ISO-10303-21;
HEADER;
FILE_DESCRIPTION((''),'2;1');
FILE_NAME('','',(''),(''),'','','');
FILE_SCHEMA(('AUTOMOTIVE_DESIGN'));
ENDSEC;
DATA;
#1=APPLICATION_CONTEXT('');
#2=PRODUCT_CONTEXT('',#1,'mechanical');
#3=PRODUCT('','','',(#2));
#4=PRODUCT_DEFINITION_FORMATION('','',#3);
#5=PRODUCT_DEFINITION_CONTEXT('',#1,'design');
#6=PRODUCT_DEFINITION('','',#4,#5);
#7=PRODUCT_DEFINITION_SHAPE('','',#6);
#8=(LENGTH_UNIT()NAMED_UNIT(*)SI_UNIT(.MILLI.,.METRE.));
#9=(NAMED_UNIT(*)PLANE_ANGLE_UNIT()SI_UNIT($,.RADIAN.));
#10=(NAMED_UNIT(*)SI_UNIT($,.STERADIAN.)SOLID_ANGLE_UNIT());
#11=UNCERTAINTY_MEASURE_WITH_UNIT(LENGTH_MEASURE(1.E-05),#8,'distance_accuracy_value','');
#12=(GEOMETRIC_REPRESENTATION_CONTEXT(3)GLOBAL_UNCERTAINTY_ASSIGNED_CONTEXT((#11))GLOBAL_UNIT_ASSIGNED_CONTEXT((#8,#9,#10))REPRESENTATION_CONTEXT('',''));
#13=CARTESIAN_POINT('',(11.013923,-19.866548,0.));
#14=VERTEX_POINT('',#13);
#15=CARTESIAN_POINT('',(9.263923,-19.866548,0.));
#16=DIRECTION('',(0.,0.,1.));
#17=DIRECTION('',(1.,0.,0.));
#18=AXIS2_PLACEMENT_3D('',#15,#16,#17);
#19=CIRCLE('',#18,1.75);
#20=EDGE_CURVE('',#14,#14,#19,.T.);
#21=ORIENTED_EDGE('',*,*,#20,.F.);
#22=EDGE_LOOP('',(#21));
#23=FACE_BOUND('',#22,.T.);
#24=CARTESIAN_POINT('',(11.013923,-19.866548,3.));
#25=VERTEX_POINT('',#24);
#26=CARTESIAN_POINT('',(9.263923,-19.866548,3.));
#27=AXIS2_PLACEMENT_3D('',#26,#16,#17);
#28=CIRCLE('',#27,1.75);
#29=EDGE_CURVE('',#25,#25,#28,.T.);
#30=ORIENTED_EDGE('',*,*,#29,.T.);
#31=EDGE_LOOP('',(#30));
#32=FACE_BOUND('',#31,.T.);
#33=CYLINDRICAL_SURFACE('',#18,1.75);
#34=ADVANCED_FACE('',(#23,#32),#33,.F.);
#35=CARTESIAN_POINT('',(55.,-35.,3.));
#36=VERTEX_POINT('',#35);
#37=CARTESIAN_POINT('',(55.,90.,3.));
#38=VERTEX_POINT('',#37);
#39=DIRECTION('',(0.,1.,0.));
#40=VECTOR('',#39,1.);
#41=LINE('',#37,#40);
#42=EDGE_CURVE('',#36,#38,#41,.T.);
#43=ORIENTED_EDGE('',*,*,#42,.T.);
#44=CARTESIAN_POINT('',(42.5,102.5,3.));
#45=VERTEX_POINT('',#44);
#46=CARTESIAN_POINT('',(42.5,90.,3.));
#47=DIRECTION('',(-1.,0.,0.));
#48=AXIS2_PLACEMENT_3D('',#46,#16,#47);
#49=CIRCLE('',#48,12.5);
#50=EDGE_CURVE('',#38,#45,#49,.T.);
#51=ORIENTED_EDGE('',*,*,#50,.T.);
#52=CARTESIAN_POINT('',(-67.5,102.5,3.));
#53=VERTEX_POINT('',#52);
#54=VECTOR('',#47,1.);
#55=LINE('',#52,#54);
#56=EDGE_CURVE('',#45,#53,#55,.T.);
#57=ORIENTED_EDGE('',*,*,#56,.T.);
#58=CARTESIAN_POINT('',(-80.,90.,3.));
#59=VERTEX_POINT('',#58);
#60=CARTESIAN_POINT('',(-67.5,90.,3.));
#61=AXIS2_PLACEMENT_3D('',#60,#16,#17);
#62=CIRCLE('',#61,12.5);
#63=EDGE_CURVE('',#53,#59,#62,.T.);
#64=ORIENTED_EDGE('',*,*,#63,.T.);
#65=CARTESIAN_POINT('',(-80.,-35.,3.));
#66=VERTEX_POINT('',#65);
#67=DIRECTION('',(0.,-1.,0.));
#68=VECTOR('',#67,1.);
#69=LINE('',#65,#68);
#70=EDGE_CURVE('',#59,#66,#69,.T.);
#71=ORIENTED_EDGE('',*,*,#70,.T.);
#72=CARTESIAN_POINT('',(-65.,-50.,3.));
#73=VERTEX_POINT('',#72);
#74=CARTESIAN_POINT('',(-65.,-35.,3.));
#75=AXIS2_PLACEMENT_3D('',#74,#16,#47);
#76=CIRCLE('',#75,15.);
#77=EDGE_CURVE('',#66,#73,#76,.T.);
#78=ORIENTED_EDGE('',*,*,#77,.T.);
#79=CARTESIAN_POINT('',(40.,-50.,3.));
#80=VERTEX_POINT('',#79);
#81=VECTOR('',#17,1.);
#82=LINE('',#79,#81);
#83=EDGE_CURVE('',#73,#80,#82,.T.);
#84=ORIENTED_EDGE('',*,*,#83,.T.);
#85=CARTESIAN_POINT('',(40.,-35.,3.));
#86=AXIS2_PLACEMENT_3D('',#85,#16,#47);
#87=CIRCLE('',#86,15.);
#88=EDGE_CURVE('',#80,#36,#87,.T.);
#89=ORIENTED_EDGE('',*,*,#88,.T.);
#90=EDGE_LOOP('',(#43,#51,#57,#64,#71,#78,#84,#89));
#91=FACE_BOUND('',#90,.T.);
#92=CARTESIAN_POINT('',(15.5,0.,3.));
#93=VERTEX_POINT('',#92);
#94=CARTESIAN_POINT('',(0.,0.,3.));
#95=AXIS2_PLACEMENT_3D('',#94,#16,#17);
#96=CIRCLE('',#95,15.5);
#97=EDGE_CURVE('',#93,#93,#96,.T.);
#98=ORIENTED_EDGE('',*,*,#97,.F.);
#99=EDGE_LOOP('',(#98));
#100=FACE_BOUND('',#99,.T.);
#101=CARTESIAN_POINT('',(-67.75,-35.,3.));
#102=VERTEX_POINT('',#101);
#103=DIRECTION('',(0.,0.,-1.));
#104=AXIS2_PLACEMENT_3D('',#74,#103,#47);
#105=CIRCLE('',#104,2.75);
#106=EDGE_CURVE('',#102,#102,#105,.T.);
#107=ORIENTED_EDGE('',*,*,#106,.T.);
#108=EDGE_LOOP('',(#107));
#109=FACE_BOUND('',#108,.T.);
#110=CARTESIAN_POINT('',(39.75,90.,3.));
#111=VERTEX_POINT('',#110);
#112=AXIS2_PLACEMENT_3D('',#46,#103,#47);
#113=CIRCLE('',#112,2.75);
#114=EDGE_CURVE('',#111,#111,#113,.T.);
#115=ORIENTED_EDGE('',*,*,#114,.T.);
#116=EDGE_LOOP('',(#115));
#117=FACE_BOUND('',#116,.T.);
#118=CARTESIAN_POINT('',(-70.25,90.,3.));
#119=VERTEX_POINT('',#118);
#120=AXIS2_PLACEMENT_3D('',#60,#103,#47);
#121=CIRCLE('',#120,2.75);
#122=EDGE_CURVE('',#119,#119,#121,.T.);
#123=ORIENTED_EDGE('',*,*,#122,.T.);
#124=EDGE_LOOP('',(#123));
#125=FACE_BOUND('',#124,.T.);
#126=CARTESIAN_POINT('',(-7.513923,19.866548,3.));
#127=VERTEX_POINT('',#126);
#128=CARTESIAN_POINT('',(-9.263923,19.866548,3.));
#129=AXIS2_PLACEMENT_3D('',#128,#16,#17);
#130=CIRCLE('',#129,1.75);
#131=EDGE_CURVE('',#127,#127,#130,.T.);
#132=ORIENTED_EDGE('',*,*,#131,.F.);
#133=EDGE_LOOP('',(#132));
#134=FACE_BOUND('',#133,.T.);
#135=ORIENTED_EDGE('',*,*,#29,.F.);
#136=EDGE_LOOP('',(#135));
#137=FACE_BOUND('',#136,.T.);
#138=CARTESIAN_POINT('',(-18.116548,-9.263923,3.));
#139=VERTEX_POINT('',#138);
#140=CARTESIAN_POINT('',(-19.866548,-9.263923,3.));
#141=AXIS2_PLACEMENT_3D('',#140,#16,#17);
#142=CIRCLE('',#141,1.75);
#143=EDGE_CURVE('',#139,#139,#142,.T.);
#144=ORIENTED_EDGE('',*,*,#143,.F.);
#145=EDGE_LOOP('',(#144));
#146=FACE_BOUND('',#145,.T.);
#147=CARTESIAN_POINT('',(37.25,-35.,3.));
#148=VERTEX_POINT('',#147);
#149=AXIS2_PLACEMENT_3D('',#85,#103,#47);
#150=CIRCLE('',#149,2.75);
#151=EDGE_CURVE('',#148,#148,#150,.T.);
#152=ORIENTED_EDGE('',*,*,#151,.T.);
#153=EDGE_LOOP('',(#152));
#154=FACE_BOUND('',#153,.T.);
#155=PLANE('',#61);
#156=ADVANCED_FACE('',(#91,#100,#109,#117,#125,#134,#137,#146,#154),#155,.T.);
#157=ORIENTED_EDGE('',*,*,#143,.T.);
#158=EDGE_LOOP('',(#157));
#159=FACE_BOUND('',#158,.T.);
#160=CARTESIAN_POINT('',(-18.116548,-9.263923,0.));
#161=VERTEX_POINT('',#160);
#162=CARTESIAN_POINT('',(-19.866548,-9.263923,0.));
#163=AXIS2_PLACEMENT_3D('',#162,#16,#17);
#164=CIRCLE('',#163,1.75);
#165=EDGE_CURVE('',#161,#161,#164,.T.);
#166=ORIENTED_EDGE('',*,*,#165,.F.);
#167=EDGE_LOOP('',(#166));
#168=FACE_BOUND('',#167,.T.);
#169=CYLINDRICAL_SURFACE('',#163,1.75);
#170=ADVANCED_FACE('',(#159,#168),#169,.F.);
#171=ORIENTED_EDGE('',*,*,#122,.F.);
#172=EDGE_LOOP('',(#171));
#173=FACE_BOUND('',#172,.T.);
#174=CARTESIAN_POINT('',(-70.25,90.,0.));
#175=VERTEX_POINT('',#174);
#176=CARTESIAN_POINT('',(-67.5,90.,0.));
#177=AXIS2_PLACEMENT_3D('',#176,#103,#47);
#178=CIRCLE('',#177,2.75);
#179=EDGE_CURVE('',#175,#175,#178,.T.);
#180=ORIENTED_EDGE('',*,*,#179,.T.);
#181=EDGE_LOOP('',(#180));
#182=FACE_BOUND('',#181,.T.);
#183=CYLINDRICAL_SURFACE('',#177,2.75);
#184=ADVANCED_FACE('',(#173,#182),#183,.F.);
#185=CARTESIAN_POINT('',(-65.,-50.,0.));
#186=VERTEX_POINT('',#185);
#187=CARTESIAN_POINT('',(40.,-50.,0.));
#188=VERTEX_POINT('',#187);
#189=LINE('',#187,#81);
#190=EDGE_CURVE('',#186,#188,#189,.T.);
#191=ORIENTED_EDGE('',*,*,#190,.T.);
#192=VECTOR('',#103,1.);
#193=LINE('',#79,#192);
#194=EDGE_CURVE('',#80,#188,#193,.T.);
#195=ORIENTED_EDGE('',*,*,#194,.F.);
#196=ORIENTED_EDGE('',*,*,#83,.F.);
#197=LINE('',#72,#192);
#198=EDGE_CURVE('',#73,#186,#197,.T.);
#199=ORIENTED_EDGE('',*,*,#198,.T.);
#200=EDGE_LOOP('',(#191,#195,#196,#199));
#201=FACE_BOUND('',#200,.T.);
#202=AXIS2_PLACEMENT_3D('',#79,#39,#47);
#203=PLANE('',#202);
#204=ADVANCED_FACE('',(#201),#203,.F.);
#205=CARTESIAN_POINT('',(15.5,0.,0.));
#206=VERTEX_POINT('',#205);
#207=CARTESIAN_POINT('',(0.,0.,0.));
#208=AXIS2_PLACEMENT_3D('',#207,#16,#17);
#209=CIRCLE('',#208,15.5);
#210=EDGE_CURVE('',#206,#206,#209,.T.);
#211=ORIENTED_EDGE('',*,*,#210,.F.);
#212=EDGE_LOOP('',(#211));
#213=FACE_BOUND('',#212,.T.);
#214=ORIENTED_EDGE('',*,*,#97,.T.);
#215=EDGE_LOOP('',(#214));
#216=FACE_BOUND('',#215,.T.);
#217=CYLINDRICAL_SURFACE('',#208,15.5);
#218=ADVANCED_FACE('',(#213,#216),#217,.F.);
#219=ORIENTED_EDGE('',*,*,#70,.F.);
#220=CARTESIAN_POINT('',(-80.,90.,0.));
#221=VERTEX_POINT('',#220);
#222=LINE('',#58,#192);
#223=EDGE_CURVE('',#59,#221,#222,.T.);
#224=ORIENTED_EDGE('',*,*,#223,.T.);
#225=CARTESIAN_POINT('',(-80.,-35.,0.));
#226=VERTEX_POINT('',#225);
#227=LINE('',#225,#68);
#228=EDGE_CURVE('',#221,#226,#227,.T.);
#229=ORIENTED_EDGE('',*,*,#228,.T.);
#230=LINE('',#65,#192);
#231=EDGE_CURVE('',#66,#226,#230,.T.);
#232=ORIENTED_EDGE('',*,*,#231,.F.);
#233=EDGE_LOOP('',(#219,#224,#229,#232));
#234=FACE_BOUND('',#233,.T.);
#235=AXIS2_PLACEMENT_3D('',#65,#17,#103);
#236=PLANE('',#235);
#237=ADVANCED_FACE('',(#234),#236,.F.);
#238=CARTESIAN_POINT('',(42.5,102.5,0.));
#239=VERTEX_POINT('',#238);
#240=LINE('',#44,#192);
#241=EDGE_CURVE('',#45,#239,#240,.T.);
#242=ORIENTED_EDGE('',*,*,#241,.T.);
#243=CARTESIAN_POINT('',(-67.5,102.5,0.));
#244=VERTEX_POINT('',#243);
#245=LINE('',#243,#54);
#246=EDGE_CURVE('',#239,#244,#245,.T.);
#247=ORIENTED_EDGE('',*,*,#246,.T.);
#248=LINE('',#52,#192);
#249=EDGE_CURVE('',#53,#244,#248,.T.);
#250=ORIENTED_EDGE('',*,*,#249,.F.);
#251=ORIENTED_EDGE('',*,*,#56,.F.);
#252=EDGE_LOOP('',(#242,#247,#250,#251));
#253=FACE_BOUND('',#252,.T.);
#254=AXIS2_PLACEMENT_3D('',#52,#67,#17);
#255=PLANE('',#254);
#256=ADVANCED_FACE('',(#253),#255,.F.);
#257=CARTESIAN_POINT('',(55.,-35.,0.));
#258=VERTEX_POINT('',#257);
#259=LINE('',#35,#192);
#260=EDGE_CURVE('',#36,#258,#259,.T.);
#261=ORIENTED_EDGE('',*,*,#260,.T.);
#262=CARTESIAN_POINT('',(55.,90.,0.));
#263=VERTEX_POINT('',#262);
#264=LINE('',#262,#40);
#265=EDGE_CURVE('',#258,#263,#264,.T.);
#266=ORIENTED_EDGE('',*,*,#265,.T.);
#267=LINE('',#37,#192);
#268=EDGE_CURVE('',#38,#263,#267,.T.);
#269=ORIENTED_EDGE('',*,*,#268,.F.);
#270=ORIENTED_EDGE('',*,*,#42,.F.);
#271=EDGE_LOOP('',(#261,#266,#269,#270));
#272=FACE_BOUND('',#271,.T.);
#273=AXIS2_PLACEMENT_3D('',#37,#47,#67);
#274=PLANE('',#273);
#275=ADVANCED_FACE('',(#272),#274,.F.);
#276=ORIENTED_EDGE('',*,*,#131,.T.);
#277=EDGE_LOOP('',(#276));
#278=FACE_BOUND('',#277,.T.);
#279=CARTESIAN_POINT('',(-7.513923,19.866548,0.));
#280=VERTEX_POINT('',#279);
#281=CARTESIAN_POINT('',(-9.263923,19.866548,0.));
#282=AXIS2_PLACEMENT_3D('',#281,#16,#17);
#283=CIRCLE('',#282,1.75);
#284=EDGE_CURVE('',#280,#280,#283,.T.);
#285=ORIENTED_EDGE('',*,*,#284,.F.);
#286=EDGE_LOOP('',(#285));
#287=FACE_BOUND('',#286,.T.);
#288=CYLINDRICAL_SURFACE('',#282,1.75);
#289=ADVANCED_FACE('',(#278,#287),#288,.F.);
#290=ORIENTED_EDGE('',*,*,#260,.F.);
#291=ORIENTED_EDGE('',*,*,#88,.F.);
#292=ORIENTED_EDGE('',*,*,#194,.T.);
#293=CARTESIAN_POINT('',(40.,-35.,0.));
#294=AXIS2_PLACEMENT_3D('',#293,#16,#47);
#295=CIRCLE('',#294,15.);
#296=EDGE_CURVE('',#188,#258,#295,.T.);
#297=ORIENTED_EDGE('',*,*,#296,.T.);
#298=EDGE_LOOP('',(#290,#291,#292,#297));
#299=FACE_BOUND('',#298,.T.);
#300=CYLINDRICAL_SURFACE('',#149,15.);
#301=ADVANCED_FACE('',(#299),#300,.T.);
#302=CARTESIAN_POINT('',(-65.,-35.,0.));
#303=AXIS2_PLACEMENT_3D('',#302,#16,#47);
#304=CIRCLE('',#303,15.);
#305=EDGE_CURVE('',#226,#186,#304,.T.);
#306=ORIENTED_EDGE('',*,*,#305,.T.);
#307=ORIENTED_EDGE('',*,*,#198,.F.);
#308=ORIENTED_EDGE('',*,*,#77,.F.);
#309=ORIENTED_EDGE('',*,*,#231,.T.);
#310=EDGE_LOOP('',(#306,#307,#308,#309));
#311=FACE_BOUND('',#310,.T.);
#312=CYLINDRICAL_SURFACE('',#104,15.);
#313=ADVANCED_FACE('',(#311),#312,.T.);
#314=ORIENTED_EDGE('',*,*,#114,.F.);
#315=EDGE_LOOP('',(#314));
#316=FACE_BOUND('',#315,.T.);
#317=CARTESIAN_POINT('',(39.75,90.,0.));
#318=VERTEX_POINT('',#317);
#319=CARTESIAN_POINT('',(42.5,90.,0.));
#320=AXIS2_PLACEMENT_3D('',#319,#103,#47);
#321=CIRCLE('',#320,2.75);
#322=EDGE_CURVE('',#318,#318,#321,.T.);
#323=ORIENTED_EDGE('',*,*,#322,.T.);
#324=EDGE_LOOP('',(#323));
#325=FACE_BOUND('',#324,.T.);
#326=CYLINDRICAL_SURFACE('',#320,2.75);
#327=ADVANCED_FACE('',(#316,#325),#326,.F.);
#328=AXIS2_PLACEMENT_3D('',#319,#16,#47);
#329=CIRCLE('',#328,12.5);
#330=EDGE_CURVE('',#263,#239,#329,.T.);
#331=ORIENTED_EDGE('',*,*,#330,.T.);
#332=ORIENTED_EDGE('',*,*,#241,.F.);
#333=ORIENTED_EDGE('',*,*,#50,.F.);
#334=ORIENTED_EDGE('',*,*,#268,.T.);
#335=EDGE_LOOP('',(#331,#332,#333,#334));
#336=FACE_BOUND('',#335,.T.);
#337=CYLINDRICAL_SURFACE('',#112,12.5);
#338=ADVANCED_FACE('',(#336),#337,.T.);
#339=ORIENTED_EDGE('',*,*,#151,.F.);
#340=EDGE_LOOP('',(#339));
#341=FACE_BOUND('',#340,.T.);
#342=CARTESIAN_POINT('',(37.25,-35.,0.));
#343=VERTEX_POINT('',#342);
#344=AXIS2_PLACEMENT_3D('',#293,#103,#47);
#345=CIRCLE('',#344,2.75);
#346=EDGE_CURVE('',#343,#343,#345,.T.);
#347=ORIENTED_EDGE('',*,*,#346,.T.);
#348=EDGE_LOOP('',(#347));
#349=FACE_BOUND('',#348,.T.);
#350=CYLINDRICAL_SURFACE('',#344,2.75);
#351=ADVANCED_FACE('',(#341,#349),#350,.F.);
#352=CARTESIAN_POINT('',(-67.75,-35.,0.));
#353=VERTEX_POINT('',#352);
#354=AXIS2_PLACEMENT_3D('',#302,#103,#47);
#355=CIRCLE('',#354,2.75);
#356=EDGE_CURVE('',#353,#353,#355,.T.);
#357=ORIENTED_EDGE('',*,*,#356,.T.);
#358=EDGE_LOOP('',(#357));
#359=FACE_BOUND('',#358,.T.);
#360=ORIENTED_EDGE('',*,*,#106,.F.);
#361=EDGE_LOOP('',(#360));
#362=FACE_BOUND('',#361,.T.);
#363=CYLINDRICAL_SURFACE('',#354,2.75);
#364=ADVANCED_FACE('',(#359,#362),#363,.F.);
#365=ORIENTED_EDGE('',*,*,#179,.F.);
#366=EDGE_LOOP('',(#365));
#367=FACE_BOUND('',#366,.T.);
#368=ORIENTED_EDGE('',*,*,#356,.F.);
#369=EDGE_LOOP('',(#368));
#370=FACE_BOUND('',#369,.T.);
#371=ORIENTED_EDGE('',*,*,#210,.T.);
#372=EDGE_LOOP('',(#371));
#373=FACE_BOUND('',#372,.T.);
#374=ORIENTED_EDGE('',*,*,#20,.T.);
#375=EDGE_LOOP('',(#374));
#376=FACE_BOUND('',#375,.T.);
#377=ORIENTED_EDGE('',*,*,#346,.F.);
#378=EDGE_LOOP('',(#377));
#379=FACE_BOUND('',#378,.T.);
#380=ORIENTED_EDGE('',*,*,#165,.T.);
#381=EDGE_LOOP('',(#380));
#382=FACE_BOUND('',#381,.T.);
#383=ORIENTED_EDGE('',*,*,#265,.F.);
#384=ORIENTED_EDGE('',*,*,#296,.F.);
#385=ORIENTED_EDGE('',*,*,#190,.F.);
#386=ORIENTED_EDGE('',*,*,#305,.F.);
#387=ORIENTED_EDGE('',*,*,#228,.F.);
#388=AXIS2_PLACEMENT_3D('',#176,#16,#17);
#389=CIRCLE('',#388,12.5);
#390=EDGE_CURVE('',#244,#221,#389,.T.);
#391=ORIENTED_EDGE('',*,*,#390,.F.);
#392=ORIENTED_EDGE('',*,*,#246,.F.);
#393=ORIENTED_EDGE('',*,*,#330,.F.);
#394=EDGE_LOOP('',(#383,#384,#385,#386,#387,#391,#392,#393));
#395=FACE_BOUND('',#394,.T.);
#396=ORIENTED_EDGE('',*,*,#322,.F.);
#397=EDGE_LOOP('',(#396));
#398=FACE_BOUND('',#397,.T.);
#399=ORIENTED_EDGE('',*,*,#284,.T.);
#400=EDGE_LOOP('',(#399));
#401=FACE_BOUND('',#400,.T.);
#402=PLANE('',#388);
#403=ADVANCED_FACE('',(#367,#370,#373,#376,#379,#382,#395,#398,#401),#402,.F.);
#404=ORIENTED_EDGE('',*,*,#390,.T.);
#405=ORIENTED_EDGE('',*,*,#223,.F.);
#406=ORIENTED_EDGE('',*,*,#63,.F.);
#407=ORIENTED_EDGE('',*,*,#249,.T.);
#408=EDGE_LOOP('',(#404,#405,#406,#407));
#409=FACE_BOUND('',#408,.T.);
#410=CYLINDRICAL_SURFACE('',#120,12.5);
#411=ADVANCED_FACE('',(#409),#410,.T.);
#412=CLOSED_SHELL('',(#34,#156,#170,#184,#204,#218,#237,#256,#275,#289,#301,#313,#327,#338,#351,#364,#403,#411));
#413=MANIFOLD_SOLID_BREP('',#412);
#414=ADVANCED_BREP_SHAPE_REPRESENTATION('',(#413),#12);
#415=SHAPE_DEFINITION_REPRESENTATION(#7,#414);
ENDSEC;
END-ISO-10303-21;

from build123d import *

# Parameters (mm, degrees)
BASE_FLANGE1_DEPTH   = 3
SKETCH2_R            = 15.5
SKETCH2_R_2          = 1.75
CUT_EXTRUDE1_DEPTH   = 131.05864062
M5_CLEARANCE_HOLE1_D = 5.5


# Sheet-metal steps are written as plain solids
with BuildPart() as part:
    # Sketch1 → Base-Flange1 (new body)
    with BuildSketch(Plane.XY):
        with BuildLine():
            Line((-67.5, 102.5), (42.5, 102.5))
            ThreePointArc((42.5, 102.5), (51.338834765, 98.838834765), (55, 90))
            Line((55, 90), (55, -35))
            ThreePointArc((55, -35), (50.606601718, -45.606601718), (40, -50))
            Line((40, -50), (-65, -50))
            ThreePointArc((-65, -50), (-75.606601718, -45.606601718), (-80, -35))
            Line((-80, -35), (-80, 90))
            ThreePointArc((-80, 90), (-76.338834765, 98.838834765), (-67.5, 102.5))
        make_face()
    extrude(amount=BASE_FLANGE1_DEPTH)

    # Sketch2 → Cut-Extrude1 (cut, through all)
    with BuildSketch(Plane.XY.offset(3)):
        Circle(SKETCH2_R)
        with Locations((-19.866547844, -9.263923401)):
            Circle(SKETCH2_R_2)
        with Locations((9.263923401, -19.866547844)):
            Circle(SKETCH2_R_2)
        with Locations((-9.263923401, 19.866547844)):
            Circle(SKETCH2_R_2)
    extrude(amount=-CUT_EXTRUDE1_DEPTH, mode=Mode.SUBTRACT)

    # M5 Clearance Hole1 (through all)
    with Locations(Plane(origin=(0, 0, 0), x_dir=(-1, 0, 0), z_dir=(0, 0, -1))):
        with Locations((-40, -35), (67.5, 90), (65, -35), (-42.5, 90)):
            Hole(M5_CLEARANCE_HOLE1_D / 2)


solid = part.part
